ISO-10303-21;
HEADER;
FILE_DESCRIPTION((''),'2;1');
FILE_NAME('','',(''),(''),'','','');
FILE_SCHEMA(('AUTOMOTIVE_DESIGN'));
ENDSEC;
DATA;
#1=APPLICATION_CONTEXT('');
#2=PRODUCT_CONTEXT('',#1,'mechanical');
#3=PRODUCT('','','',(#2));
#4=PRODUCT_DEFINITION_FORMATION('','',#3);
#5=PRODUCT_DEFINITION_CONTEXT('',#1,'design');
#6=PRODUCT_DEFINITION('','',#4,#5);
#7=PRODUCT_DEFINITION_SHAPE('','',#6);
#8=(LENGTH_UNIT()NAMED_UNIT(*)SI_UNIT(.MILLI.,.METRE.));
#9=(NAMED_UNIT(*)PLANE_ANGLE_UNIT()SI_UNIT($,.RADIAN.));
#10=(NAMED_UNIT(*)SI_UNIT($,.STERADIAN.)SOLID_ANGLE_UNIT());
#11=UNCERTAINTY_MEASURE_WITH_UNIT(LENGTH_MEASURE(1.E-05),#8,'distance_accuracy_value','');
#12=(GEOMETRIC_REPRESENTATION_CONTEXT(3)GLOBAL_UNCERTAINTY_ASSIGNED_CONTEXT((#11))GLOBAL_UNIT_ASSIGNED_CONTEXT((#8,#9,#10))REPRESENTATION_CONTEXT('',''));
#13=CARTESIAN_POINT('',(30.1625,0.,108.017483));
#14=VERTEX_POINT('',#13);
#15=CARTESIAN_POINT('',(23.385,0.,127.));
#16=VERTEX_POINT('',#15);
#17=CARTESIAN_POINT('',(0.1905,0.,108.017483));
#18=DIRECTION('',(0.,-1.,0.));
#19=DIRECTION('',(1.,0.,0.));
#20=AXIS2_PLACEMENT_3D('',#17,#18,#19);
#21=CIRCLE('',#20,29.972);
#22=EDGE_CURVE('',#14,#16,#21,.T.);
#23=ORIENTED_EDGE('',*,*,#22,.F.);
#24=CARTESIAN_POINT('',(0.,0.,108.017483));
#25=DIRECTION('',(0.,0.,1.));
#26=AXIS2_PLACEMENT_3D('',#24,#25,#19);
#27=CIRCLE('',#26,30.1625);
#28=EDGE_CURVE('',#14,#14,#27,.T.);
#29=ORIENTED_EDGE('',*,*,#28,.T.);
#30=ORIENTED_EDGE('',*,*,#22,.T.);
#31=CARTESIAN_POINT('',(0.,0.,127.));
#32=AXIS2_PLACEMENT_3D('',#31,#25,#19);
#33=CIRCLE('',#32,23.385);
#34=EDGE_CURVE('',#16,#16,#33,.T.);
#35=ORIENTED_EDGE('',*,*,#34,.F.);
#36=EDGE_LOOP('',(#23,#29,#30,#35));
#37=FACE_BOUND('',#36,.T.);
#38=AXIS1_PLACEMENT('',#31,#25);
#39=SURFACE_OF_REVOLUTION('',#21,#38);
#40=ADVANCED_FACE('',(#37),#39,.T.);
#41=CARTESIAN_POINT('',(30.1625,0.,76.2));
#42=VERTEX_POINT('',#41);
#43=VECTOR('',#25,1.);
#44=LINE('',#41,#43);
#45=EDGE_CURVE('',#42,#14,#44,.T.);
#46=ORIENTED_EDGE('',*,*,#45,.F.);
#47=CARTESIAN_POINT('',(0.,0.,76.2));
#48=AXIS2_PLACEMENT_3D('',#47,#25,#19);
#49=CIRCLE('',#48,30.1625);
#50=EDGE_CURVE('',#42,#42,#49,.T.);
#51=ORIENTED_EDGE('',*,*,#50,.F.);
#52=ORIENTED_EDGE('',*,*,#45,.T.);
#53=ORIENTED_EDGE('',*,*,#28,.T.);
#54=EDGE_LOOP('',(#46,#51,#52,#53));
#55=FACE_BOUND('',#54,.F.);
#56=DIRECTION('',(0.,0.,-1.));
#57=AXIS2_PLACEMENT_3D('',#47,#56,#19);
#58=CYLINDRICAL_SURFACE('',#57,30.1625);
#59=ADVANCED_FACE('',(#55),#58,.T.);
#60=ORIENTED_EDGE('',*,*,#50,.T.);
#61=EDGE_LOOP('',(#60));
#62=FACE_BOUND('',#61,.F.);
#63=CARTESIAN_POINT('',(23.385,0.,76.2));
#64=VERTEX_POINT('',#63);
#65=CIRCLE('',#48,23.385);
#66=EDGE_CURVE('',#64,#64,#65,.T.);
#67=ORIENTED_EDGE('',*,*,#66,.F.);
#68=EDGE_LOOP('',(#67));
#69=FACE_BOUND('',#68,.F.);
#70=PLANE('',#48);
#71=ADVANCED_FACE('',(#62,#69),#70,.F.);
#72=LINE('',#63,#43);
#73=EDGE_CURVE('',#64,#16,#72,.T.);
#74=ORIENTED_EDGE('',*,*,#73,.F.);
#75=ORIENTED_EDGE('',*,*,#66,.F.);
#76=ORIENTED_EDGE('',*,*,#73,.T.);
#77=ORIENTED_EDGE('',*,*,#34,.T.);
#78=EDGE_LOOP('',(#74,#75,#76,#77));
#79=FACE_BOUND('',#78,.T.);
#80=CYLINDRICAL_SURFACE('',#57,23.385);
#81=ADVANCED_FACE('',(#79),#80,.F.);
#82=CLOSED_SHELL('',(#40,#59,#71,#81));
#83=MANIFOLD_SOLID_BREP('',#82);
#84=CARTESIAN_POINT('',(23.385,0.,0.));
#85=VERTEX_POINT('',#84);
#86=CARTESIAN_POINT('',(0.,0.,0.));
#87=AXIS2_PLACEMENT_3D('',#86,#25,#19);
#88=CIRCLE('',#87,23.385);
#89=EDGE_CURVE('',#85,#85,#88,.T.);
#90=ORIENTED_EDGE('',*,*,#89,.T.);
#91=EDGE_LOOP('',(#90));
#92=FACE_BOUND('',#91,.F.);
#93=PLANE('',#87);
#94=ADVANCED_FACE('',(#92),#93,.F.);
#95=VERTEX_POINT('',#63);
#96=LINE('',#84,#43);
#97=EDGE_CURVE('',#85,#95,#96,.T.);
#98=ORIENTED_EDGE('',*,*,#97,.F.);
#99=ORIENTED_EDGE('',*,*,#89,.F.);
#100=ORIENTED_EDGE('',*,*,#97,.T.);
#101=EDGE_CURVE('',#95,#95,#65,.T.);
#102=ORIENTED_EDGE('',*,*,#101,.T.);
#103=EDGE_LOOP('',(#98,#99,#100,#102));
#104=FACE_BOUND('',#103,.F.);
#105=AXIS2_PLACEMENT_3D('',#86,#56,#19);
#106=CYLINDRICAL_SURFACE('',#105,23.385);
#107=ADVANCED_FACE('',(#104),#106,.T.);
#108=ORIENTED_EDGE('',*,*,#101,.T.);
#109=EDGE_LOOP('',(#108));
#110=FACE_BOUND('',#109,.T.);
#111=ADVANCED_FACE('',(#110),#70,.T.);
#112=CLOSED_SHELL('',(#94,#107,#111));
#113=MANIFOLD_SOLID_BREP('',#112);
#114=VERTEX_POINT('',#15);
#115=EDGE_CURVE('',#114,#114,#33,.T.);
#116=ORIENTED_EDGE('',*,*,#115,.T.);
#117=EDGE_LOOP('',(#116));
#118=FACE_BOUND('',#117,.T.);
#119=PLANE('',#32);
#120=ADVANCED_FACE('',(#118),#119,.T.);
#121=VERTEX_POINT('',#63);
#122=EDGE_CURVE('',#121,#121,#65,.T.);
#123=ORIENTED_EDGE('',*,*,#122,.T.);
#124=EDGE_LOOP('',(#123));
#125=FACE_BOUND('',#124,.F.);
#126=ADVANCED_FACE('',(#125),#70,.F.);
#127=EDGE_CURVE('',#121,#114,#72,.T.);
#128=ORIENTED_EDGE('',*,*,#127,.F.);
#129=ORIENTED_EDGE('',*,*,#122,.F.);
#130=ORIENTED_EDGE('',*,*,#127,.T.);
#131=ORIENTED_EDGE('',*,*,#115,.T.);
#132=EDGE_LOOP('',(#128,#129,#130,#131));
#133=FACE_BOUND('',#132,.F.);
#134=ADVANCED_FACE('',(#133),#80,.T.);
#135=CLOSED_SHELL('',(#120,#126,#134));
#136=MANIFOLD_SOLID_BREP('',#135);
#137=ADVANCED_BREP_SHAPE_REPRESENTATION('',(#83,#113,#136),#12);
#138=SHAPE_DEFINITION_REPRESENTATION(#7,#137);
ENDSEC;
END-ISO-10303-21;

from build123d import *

# Parameters (mm, degrees)
F0_R     = 23.38500022
F1_DEPTH = 76.2
F2_R     = 30.1625
F2_R_2   = 23.38500022
F3_DEPTH = 50.8
F4_DEPTH = 50.8


# Not quite as in the source:
# - a fillet or chamfer that OpenCascade refuses, or shapes differently, is made with other operations: its cross-section is extruded or revolved along the edge and cut away or added


with BuildPart() as f1:
    # F0 (on Top) → F1 (new body)
    with BuildSketch(Plane.XY):
        Circle(F0_R)
    extrude(amount=F1_DEPTH)


with BuildPart() as f3:
    # F2 (on face) → F3 (new body)
    with BuildSketch(Plane.XY.offset(76.2)):
        Circle(F2_R)
        Circle(F2_R_2, mode=Mode.SUBTRACT)
    extrude(amount=F3_DEPTH)

    # F5: fillet of radius 29.972 on 1 edges, made by hand

    # F5_s1 → F5_t2 (revolve, cut)
    with BuildSketch(Plane.XZ):
        with BuildLine():
            ThreePointArc((30.1625, 108.0174832136), (28.4173165456, 118.0955590073), (23.38500022, 127))
            Line((23.38500022, 127), (30.1625, 127))
            Line((30.1625, 127), (30.1625, 108.0174832136))
        make_face()
    revolve(axis=Axis((0, 0, 127), (0, 0, 1)), mode=Mode.SUBTRACT)


with BuildPart() as f4:
    # F4 (new): a face of the model
    f4_faces = [f1.part.faces().sort_by_distance(p)[0] for p in [
        (0, 0, 76.2),
    ]]
    extrude(f4_faces, amount=F4_DEPTH)


solid = Compound([f1.part, f3.part, f4.part])
